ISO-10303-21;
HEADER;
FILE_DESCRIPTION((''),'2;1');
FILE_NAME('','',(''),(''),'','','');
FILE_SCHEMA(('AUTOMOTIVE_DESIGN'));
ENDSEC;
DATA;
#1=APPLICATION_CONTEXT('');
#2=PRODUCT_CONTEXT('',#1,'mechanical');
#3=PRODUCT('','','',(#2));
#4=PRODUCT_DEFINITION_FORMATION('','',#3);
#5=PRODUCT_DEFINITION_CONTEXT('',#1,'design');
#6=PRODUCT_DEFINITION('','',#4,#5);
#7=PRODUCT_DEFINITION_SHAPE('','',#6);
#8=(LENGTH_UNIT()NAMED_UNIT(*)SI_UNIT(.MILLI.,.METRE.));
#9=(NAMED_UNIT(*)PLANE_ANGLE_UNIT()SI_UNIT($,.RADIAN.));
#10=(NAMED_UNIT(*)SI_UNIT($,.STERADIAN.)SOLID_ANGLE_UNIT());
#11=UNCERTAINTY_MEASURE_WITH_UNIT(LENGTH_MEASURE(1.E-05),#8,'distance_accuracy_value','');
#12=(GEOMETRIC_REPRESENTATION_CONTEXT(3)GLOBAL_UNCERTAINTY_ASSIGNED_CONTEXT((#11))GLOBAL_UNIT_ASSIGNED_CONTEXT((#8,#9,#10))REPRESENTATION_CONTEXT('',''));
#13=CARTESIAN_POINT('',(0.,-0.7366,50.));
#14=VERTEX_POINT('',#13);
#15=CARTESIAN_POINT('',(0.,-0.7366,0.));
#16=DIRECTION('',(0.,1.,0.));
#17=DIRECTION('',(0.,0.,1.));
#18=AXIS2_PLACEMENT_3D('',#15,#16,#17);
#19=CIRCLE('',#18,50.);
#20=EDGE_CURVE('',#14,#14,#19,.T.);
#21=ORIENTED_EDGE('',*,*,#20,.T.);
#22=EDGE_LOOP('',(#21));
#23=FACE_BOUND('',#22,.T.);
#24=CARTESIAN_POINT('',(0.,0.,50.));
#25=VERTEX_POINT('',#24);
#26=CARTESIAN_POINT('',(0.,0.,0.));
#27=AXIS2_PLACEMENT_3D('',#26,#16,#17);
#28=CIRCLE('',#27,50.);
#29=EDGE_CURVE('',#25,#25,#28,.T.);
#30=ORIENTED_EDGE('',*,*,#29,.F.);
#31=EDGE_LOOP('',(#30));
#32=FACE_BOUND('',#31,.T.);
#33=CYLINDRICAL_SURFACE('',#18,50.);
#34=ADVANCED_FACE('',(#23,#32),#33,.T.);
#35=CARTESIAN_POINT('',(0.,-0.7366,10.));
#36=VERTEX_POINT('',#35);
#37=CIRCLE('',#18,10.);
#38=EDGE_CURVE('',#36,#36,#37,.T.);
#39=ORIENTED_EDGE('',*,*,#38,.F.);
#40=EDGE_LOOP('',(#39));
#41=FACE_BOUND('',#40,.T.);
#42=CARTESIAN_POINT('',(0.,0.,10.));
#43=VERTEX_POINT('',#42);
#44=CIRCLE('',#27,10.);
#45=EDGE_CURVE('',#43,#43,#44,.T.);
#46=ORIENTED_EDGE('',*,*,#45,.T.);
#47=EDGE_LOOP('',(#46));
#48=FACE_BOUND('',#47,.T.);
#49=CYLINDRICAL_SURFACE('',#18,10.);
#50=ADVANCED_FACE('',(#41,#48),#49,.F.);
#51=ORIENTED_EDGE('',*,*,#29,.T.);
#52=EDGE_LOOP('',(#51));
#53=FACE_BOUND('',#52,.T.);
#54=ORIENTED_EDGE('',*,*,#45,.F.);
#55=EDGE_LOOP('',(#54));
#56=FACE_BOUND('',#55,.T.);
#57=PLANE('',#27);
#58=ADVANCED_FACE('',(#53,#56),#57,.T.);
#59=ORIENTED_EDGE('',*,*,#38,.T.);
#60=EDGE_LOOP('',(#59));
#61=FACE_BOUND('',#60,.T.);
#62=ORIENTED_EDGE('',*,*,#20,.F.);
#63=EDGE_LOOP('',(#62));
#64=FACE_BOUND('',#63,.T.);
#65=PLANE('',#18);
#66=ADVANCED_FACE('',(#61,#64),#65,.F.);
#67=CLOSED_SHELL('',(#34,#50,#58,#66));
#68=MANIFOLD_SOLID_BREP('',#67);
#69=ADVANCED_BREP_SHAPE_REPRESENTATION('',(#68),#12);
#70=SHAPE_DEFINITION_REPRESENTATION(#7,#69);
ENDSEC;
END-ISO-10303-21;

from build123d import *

# Parameters (mm, degrees)
SKETCH1_R          = 50
SKETCH1_R_2        = 10
BASE_FLANGE1_DEPTH = 0.7366


# Sheet-metal steps are written as plain solids
with BuildPart() as part:
    # Sketch1 → Base-Flange1 (new body)
    with BuildSketch(Plane(origin=(0, 0, 0), x_dir=(1, 0, 0), z_dir=(0, 1, 0))):
        with Locations(Location((0, 0, 0), (0, 0, 270))):
            Circle(SKETCH1_R)
        with Locations(Location((0, 0, 0), (0, 0, 270))):
            Circle(SKETCH1_R_2, mode=Mode.SUBTRACT)
    extrude(amount=-BASE_FLANGE1_DEPTH)


solid = part.part
